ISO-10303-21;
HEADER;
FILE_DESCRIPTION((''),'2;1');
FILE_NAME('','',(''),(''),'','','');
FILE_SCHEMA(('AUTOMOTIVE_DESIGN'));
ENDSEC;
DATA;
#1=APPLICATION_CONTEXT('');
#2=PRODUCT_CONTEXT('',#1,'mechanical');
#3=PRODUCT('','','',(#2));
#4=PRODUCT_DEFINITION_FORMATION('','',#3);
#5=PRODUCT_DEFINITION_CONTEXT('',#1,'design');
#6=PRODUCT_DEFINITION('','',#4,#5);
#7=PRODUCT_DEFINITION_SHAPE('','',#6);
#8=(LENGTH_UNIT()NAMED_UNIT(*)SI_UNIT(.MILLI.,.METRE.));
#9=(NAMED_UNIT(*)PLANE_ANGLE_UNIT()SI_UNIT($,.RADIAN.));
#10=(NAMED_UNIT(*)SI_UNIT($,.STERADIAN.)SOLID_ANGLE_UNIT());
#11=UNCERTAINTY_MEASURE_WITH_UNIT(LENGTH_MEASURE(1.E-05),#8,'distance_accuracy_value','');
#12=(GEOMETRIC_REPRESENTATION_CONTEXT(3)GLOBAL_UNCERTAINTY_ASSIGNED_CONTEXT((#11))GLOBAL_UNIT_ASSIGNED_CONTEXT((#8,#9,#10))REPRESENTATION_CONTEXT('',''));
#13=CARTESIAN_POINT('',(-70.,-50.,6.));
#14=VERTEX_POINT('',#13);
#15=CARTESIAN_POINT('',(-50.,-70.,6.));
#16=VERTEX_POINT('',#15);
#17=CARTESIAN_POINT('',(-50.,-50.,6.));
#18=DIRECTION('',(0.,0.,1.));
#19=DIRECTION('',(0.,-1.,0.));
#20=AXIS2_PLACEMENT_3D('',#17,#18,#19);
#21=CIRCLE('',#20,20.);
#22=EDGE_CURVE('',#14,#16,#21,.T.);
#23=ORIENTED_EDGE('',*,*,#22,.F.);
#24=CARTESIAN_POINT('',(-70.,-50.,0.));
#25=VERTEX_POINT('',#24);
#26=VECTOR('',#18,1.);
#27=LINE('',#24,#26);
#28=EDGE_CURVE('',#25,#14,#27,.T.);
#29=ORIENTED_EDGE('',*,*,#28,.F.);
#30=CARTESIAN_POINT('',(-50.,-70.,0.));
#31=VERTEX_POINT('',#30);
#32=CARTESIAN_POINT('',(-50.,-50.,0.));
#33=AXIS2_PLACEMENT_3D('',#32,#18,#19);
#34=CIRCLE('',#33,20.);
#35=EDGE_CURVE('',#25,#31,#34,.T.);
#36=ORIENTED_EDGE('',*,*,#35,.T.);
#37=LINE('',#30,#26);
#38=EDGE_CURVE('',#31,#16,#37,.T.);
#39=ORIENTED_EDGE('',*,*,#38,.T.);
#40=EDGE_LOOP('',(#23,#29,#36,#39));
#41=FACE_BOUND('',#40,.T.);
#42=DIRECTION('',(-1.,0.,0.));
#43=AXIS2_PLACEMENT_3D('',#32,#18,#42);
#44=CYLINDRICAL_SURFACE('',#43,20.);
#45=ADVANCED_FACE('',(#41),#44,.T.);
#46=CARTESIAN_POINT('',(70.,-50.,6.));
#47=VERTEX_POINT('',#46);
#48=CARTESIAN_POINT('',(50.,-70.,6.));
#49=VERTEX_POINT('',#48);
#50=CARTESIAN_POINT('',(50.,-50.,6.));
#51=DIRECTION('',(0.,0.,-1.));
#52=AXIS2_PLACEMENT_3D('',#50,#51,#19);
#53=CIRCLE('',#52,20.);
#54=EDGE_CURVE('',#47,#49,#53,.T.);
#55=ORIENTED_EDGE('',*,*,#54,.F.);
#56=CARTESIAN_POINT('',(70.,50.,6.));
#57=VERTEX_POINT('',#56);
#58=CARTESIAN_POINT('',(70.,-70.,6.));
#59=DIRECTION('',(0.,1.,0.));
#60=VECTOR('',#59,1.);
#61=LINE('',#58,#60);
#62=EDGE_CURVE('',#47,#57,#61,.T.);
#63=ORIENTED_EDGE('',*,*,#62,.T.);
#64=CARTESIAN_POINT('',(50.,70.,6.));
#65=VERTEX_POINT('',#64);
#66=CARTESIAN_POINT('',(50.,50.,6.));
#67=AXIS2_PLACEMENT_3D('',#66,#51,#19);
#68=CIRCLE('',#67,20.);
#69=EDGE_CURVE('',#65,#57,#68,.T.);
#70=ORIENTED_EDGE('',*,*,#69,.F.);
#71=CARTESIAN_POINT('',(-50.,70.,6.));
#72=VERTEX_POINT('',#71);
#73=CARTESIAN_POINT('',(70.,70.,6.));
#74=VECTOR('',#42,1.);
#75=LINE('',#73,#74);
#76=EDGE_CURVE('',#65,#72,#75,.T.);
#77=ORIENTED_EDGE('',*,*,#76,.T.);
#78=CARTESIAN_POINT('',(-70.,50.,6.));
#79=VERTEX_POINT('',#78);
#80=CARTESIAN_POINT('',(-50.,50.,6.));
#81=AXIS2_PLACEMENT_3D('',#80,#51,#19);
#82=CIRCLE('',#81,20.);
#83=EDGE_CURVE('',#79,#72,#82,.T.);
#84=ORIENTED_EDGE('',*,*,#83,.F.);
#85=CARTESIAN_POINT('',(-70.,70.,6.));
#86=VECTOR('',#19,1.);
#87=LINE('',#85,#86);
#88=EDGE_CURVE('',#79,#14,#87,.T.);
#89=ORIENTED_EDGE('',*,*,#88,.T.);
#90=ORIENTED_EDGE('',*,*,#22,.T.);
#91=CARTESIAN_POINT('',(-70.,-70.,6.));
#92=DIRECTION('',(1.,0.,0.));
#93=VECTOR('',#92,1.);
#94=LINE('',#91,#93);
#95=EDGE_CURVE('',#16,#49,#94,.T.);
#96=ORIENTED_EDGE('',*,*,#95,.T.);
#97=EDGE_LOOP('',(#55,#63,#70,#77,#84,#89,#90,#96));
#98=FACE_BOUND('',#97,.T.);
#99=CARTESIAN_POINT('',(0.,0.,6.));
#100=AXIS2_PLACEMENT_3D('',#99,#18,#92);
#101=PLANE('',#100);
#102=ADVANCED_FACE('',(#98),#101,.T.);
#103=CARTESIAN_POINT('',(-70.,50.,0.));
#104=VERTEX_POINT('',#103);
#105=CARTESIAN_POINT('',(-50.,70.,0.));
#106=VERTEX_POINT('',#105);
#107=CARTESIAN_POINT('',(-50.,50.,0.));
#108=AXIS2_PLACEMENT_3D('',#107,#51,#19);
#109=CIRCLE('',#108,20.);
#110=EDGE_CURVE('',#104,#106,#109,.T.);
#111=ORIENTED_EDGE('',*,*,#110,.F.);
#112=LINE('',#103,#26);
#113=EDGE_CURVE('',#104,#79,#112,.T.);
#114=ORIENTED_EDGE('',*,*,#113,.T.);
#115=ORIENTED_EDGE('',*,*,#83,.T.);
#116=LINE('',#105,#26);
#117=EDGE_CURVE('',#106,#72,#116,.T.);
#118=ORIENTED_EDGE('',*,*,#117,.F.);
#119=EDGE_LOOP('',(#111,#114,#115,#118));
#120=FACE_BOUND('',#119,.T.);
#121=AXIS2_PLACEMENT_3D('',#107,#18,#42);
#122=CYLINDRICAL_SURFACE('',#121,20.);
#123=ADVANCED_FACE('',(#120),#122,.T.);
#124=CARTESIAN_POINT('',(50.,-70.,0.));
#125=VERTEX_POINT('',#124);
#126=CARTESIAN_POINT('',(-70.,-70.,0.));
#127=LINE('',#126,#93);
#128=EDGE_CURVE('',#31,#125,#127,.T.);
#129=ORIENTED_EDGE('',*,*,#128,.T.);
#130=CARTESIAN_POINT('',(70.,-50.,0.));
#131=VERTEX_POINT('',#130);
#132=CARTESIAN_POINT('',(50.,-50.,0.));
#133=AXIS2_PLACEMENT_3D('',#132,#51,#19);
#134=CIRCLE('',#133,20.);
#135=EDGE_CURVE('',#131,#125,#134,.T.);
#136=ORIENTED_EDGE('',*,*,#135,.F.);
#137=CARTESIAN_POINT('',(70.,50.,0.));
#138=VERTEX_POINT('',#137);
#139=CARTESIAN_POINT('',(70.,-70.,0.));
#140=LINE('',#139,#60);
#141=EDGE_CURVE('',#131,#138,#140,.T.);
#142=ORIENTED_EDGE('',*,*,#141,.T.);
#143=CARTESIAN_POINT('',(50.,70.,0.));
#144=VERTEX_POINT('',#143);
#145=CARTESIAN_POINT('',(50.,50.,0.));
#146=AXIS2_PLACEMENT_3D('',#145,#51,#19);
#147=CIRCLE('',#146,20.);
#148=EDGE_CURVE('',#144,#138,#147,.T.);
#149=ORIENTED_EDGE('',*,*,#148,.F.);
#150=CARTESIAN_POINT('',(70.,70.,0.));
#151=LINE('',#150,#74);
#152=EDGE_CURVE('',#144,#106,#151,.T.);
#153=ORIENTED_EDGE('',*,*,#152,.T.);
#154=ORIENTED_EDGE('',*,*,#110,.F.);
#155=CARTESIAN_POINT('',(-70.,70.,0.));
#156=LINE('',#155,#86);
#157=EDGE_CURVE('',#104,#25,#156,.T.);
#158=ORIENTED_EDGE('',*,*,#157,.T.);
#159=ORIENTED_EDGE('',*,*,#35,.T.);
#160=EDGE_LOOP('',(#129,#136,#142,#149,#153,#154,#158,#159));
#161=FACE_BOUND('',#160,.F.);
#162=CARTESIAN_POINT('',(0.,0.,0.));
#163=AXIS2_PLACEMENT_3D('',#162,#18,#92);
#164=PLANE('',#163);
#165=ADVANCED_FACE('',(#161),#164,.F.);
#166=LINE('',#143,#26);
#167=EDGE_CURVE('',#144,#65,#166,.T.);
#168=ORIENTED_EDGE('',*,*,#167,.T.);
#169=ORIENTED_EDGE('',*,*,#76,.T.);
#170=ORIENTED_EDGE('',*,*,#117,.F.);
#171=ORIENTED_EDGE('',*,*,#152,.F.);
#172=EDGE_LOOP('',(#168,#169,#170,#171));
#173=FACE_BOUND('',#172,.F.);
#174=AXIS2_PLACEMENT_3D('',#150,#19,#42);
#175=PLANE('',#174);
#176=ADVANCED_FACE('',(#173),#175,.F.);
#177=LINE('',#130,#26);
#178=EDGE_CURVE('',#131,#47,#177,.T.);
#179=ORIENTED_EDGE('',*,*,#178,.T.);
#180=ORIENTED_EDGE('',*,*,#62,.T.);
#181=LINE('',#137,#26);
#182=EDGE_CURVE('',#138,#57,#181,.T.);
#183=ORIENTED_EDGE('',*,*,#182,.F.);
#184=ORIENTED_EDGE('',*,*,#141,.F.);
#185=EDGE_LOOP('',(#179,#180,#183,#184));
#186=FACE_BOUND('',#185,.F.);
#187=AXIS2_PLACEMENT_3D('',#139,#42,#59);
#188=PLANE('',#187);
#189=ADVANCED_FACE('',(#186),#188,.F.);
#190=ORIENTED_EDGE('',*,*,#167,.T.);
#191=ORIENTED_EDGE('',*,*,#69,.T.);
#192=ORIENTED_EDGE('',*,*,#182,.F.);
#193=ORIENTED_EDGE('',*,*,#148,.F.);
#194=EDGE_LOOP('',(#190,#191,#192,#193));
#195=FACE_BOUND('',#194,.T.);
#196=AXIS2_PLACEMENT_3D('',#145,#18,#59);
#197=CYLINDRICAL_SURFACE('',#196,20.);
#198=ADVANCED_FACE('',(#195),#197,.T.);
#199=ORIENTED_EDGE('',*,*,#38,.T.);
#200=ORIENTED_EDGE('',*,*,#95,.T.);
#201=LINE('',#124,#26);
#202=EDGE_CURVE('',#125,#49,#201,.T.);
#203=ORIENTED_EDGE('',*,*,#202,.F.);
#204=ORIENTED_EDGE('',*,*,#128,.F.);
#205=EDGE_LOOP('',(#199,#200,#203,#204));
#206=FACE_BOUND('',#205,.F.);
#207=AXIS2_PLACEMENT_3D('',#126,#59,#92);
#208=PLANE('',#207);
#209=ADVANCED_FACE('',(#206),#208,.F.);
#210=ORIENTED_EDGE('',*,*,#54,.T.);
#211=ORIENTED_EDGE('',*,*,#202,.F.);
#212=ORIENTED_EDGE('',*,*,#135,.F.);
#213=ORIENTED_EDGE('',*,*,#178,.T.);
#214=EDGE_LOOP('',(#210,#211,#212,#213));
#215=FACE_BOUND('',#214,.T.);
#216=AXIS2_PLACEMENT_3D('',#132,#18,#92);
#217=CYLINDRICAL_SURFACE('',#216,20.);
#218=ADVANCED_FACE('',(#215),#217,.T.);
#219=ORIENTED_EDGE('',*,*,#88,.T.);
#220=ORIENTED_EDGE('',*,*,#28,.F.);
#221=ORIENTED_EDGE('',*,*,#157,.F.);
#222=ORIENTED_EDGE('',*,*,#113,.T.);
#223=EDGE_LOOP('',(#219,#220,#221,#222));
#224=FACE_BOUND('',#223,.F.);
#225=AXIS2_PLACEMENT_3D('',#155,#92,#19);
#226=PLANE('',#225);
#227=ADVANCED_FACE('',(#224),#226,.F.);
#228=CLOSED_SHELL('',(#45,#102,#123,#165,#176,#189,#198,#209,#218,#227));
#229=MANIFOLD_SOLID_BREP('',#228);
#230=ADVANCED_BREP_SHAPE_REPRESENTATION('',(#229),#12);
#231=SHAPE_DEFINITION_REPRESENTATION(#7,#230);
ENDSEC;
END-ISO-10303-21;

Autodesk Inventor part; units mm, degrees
ref_plane "YZ Plane" through (0, 0, 0) normal (1, 0, 0) x (0, 1, 0)
ref_plane "XZ Plane" through (0, 0, 0) normal (0, 1, 0) x (-1, 0, 0)
ref_plane "XY Plane" through (0, 0, 0) normal (0, 0, 1) x (1, 0, 0)
sketch "Sketch1" plane through (0, 0, 0) normal (0, 0, 1) x (1, 0, 0)
  line L0 (-70, -70) -> (70, -70)
  line L1 (70, -70) -> (70, 70)
  line L2 (70, 70) -> (-70, 70)
  line L3 (-70, 70) -> (-70, -70)
  line L4 (-70, -70) -> (70, 70) construction
  line L5 (70, -70) -> (-70, 70) construction
  point P0 (0, 0)
  dimension "d0" = 140
  dimension "d1" = 140
extrude "Plate1" add sketch "Sketch1" along normal blind 6
fillet "Corner Round1" radius 20 4 edges at (70, -70, 3) (-70, -70, 3) (-70, 70, 3) (70, 70, 3)
sketch "Sketch5" plane through (0, 0, 6) normal (0, 0, 1) x (1, 0, 0)
  line L0 (70, 50) -> (70, -50) projected
  line L1 (70, 40) -> (-70, 40)
  line L2 (-70, -50) -> (-70, 50) projected
  line L3 (-50, 70) -> (50, 70) projected
  point P0 (0, 0)
  dimension "d23" = 30
feature "Fold1" [suppressed]
equation "\"d0\" = d1"
equation "\"d2\" = Thickness"
equation "\"d24\" = BendReliefWidth"
equation "\"d25\" = BendReliefDepth"
equation "\"d26\" = MinimumRemnant"
equation "\"d27\" = TransitionRadius"
equation "\"d29\" = BendRadius"
equation "\"BendReliefWidth\" = Thickness"
equation "\"BendReliefDepth\" = 0.5 * Thickness"
equation "\"CornerReliefSize\" = 4 * Thickness"
equation "\"MinimumRemnant\" = 2 * Thickness"
equation "\"TransitionRadius\" = BendRadius"
equation "\"JacobiRadiusSize\" = BendRadius"
equation "\"GapSize\" = Thickness"
equation "\"Thickness\" = 6"
equation "\"BendRadius\" = 5"
properties part number "PNS 1694 leg plate for filter_1200" material "Stainless Steel"
